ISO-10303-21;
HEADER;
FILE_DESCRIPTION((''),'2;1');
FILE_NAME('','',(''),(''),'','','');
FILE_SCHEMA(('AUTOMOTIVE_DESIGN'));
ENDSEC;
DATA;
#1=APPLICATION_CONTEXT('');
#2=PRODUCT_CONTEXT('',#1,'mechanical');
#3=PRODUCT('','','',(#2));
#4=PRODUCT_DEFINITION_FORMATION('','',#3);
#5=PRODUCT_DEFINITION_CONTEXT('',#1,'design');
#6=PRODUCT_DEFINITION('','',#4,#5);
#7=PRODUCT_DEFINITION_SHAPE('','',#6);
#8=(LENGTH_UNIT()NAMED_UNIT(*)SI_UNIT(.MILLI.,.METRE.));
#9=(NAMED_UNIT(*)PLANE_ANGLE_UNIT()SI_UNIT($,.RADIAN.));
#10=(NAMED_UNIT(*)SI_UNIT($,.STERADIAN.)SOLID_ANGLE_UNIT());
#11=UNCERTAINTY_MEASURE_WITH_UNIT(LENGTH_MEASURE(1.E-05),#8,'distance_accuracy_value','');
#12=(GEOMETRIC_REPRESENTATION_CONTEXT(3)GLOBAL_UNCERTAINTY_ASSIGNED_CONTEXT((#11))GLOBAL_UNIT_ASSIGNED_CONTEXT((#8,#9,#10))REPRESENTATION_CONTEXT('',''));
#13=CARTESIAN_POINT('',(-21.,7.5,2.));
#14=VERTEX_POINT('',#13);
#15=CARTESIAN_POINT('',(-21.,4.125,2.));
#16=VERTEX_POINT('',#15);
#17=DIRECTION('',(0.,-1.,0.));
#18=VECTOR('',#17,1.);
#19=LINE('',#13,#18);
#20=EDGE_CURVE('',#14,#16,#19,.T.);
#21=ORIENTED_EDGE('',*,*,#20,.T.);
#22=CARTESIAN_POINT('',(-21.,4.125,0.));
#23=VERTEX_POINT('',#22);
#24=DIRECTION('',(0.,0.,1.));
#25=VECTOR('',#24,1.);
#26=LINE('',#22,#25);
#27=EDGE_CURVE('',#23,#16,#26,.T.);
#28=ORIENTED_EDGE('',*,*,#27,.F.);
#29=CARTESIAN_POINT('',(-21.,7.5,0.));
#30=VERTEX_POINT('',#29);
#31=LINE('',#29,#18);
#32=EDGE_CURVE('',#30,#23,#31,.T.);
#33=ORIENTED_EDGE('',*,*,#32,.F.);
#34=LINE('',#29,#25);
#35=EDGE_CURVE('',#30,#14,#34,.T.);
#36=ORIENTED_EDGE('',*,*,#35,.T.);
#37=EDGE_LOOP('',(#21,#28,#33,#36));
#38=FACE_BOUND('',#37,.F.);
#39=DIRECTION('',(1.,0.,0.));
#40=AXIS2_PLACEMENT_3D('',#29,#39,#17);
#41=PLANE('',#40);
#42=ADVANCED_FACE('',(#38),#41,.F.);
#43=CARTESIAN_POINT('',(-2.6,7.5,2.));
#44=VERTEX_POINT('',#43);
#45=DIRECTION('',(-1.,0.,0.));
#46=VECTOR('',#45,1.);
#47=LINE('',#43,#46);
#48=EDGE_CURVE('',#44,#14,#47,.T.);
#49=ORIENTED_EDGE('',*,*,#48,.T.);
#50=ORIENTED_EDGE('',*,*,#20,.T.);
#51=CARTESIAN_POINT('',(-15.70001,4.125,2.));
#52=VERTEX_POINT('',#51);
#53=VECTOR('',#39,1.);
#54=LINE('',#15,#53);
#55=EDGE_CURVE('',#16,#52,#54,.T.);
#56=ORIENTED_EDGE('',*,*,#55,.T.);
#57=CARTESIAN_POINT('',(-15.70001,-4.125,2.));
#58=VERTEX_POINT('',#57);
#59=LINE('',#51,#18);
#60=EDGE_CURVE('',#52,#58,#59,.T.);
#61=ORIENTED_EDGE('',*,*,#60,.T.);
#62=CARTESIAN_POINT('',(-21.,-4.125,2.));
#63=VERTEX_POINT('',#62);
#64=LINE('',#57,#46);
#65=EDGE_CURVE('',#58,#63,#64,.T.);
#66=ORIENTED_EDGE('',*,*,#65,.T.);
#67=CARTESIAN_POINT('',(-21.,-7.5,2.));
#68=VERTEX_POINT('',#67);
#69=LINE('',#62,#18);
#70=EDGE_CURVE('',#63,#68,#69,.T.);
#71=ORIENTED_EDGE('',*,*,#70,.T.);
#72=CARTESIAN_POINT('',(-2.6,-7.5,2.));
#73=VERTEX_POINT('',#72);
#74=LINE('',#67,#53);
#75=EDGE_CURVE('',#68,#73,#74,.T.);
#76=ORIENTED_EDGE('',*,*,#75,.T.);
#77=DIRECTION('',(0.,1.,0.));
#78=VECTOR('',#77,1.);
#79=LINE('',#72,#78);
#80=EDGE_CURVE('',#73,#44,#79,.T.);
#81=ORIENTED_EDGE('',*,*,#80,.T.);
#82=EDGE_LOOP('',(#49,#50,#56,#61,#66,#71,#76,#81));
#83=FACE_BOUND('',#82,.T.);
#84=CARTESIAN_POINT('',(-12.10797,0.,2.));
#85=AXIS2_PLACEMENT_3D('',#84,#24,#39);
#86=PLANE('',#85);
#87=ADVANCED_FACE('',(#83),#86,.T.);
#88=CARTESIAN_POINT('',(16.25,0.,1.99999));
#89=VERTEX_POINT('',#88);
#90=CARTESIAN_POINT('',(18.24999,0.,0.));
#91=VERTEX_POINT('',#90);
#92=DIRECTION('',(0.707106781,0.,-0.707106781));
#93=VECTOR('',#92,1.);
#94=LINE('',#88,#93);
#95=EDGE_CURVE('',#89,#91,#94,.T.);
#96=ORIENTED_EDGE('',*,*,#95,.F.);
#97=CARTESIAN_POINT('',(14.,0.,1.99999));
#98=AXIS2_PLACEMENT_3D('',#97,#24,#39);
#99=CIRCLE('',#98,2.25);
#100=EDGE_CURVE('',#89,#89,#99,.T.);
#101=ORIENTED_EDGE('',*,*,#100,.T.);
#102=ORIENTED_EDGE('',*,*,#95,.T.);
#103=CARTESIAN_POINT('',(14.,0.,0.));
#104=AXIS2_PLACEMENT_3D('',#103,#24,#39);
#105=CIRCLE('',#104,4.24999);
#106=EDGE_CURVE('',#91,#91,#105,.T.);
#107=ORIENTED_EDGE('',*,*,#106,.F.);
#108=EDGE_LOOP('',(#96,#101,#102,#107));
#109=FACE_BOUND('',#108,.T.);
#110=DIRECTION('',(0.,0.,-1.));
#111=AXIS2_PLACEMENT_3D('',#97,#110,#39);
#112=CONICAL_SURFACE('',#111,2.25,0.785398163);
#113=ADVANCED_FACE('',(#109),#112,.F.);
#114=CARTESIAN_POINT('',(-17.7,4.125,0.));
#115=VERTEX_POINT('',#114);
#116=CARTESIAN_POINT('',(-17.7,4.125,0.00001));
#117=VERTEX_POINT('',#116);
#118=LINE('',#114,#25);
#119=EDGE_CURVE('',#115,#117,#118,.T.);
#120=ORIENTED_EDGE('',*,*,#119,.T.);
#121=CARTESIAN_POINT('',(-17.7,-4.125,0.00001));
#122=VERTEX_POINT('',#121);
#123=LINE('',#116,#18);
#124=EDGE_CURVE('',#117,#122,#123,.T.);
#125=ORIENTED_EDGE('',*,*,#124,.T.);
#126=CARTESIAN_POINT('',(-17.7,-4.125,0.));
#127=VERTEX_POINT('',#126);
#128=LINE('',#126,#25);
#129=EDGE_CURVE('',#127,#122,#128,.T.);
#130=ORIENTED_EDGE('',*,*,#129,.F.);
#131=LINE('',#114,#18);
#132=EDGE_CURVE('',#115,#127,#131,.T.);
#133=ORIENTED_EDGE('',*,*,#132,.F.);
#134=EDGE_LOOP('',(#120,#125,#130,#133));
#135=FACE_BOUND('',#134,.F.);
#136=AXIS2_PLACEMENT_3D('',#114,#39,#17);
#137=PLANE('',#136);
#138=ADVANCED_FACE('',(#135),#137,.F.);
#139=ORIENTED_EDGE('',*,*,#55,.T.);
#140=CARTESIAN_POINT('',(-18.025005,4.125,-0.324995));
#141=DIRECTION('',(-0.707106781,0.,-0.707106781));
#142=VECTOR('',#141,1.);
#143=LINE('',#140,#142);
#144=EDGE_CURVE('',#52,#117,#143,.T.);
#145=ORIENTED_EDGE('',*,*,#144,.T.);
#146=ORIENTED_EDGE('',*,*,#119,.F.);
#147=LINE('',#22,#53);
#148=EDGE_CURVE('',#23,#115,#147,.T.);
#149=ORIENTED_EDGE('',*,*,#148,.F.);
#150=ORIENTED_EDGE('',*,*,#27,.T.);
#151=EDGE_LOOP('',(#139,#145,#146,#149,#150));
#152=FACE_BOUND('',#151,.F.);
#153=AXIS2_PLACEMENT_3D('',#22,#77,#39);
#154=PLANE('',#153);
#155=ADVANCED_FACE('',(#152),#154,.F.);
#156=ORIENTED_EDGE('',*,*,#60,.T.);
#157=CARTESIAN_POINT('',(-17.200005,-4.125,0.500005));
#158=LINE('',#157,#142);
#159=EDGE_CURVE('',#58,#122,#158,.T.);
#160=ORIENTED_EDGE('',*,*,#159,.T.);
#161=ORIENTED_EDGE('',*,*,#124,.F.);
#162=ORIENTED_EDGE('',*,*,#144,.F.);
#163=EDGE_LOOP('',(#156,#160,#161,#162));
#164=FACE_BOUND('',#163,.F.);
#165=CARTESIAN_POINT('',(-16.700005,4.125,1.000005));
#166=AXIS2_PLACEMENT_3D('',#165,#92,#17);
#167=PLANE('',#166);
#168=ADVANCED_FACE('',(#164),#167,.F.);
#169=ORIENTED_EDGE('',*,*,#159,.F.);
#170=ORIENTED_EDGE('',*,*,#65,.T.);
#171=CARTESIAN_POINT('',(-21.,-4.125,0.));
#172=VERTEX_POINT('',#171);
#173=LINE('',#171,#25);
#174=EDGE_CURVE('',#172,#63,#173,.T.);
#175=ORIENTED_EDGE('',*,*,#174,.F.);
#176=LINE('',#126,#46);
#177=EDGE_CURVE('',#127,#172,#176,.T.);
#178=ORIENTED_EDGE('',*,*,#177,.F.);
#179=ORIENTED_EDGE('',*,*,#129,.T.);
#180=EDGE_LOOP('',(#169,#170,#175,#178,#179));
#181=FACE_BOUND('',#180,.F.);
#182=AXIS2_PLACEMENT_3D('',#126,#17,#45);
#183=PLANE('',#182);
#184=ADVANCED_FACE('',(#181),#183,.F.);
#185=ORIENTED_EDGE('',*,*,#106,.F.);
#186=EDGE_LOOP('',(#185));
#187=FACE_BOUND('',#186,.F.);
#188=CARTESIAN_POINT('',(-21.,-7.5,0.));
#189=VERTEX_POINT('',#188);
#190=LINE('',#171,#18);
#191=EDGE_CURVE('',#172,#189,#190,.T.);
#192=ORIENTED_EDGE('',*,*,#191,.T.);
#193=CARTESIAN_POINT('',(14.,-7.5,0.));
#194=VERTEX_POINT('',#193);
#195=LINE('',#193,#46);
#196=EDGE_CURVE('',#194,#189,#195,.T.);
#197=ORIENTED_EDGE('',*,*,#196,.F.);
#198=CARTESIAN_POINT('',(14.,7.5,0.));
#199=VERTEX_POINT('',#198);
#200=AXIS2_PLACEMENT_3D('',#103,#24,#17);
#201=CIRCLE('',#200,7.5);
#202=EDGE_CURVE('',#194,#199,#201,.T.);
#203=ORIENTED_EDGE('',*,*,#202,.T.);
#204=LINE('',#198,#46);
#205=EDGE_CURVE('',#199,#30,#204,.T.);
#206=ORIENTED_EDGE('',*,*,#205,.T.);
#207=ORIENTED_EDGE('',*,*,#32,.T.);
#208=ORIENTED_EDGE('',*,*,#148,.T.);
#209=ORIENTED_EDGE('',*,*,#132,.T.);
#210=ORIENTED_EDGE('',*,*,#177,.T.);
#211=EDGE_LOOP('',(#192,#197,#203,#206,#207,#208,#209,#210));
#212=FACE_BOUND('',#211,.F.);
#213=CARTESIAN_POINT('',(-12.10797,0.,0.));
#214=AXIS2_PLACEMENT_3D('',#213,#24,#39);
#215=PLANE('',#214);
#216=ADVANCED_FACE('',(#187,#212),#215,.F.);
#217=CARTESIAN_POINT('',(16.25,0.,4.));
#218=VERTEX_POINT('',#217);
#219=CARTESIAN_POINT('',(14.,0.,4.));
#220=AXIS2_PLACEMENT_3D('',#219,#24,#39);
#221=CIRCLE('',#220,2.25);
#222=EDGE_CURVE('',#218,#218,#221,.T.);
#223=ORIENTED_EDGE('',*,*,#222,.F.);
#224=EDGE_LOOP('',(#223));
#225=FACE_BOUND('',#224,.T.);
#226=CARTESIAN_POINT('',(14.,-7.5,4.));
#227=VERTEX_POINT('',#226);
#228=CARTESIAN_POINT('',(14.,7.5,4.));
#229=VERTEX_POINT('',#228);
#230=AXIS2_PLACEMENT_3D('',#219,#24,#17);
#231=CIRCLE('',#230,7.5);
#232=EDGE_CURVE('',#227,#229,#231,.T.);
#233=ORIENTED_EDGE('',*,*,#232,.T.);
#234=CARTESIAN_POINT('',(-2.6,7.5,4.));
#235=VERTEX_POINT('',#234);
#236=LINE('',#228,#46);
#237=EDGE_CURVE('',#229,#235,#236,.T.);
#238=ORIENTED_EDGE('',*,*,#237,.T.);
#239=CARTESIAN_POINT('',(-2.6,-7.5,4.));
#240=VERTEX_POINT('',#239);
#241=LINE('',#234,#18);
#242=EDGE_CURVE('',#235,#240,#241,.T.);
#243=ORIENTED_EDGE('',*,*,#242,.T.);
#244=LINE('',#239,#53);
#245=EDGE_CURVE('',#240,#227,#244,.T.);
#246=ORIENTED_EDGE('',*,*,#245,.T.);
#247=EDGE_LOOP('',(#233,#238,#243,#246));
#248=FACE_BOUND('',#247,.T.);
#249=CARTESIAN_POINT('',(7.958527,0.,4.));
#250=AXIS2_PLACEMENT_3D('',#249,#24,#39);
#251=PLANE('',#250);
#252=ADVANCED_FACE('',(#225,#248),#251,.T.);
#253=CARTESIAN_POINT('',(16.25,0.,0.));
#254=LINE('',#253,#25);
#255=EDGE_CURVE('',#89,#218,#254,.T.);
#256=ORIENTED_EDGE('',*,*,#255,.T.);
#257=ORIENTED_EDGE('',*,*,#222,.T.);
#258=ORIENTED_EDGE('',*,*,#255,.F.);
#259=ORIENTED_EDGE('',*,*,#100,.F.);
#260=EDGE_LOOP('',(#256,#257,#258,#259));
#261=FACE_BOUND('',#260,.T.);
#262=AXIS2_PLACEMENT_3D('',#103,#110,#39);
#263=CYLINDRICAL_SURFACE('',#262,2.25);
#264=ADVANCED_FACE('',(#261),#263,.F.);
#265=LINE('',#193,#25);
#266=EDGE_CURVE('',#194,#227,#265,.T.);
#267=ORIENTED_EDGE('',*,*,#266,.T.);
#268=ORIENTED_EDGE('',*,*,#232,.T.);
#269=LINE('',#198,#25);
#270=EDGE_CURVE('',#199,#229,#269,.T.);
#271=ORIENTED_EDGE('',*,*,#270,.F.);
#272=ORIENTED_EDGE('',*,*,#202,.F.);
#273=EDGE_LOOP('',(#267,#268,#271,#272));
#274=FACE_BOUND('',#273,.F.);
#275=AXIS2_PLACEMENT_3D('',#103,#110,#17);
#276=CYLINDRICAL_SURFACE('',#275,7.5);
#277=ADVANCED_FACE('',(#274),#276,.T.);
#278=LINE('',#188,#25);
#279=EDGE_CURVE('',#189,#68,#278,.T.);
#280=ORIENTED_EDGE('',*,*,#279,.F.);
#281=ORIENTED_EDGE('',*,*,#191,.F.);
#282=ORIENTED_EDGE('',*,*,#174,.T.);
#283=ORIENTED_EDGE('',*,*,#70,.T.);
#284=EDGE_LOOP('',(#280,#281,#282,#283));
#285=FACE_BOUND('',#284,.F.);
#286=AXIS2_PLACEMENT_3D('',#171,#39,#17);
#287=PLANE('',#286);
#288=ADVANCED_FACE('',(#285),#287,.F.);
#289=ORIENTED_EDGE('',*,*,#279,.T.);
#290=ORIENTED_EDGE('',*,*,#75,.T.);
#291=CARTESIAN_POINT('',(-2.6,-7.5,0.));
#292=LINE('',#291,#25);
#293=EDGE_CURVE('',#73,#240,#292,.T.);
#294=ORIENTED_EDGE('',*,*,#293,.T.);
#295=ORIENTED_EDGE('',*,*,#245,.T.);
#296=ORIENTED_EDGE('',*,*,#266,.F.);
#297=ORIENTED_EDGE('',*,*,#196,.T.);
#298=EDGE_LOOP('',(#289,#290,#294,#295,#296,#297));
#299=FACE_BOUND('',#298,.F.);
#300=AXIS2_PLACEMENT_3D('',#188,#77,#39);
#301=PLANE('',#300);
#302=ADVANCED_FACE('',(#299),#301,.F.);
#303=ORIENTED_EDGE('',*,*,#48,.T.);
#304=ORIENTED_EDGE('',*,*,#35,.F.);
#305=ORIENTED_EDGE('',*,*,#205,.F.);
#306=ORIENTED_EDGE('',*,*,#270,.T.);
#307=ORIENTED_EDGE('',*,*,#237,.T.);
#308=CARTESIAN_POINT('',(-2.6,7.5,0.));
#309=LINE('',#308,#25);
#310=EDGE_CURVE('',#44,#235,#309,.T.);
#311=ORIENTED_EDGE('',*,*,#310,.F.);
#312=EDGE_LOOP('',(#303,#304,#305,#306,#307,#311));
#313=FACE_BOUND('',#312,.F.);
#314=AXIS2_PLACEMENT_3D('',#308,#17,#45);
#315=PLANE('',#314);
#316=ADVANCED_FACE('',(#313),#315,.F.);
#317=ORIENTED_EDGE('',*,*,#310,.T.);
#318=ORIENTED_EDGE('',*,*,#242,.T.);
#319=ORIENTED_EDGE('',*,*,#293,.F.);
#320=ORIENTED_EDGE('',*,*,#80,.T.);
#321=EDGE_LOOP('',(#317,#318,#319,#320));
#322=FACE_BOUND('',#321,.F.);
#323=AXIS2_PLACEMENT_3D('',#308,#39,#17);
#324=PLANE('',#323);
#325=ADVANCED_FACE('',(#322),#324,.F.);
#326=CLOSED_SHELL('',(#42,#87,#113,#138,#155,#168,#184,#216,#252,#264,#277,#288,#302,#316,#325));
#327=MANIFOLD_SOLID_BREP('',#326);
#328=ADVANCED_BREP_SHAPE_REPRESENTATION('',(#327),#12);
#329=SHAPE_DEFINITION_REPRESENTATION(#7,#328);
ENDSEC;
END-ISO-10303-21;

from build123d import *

# Parameters (mm, degrees)
F0_R     = 2.25
F1_DEPTH = 4
F2_DEPTH = 2
F3_SIZE  = 1.99999


# Not quite as in the source:
# - a fillet or chamfer is up to 0.001 mm smaller than in the source, because OpenCascade refuses the exact size


with BuildPart() as f1:
    # F0 (on Top) → F1 (new body)
    with BuildSketch(Plane.XY):
        with BuildLine():
            Line((14, 7.5), (-2.6, 7.5))
            Line((-2.6, 7.5), (-2.6, -7.5))
            Line((-2.6, -7.5), (14, -7.5))
            ThreePointArc((14, -7.5), (21.5, 0), (14, 7.5))
        make_face()
        with Locations((14, 0)):
            Circle(F0_R, mode=Mode.SUBTRACT)
    extrude(amount=F1_DEPTH)

    # F0 (on Top) → F2 (join)
    with BuildSketch(Plane.XY):
        Polygon((-2.6, 7.5), (-21, 7.5), (-21, 4.125), (-17.7, 4.125), (-17.7, -4.125), (-21, -4.125), (-21, -7.5), (-2.6, -7.5), align=None)
    extrude(amount=F2_DEPTH)

    # F3 (size 2 in the source; OpenCascade refuses exactly that, so slightly less here)
    f3_edges = [f1.edges().sort_by_distance(p)[0] for p in [
        (11.75, 0, 0),
        (-17.7, 0, 2),
    ]]
    chamfer(f3_edges, length=F3_SIZE)


solid = f1.part
